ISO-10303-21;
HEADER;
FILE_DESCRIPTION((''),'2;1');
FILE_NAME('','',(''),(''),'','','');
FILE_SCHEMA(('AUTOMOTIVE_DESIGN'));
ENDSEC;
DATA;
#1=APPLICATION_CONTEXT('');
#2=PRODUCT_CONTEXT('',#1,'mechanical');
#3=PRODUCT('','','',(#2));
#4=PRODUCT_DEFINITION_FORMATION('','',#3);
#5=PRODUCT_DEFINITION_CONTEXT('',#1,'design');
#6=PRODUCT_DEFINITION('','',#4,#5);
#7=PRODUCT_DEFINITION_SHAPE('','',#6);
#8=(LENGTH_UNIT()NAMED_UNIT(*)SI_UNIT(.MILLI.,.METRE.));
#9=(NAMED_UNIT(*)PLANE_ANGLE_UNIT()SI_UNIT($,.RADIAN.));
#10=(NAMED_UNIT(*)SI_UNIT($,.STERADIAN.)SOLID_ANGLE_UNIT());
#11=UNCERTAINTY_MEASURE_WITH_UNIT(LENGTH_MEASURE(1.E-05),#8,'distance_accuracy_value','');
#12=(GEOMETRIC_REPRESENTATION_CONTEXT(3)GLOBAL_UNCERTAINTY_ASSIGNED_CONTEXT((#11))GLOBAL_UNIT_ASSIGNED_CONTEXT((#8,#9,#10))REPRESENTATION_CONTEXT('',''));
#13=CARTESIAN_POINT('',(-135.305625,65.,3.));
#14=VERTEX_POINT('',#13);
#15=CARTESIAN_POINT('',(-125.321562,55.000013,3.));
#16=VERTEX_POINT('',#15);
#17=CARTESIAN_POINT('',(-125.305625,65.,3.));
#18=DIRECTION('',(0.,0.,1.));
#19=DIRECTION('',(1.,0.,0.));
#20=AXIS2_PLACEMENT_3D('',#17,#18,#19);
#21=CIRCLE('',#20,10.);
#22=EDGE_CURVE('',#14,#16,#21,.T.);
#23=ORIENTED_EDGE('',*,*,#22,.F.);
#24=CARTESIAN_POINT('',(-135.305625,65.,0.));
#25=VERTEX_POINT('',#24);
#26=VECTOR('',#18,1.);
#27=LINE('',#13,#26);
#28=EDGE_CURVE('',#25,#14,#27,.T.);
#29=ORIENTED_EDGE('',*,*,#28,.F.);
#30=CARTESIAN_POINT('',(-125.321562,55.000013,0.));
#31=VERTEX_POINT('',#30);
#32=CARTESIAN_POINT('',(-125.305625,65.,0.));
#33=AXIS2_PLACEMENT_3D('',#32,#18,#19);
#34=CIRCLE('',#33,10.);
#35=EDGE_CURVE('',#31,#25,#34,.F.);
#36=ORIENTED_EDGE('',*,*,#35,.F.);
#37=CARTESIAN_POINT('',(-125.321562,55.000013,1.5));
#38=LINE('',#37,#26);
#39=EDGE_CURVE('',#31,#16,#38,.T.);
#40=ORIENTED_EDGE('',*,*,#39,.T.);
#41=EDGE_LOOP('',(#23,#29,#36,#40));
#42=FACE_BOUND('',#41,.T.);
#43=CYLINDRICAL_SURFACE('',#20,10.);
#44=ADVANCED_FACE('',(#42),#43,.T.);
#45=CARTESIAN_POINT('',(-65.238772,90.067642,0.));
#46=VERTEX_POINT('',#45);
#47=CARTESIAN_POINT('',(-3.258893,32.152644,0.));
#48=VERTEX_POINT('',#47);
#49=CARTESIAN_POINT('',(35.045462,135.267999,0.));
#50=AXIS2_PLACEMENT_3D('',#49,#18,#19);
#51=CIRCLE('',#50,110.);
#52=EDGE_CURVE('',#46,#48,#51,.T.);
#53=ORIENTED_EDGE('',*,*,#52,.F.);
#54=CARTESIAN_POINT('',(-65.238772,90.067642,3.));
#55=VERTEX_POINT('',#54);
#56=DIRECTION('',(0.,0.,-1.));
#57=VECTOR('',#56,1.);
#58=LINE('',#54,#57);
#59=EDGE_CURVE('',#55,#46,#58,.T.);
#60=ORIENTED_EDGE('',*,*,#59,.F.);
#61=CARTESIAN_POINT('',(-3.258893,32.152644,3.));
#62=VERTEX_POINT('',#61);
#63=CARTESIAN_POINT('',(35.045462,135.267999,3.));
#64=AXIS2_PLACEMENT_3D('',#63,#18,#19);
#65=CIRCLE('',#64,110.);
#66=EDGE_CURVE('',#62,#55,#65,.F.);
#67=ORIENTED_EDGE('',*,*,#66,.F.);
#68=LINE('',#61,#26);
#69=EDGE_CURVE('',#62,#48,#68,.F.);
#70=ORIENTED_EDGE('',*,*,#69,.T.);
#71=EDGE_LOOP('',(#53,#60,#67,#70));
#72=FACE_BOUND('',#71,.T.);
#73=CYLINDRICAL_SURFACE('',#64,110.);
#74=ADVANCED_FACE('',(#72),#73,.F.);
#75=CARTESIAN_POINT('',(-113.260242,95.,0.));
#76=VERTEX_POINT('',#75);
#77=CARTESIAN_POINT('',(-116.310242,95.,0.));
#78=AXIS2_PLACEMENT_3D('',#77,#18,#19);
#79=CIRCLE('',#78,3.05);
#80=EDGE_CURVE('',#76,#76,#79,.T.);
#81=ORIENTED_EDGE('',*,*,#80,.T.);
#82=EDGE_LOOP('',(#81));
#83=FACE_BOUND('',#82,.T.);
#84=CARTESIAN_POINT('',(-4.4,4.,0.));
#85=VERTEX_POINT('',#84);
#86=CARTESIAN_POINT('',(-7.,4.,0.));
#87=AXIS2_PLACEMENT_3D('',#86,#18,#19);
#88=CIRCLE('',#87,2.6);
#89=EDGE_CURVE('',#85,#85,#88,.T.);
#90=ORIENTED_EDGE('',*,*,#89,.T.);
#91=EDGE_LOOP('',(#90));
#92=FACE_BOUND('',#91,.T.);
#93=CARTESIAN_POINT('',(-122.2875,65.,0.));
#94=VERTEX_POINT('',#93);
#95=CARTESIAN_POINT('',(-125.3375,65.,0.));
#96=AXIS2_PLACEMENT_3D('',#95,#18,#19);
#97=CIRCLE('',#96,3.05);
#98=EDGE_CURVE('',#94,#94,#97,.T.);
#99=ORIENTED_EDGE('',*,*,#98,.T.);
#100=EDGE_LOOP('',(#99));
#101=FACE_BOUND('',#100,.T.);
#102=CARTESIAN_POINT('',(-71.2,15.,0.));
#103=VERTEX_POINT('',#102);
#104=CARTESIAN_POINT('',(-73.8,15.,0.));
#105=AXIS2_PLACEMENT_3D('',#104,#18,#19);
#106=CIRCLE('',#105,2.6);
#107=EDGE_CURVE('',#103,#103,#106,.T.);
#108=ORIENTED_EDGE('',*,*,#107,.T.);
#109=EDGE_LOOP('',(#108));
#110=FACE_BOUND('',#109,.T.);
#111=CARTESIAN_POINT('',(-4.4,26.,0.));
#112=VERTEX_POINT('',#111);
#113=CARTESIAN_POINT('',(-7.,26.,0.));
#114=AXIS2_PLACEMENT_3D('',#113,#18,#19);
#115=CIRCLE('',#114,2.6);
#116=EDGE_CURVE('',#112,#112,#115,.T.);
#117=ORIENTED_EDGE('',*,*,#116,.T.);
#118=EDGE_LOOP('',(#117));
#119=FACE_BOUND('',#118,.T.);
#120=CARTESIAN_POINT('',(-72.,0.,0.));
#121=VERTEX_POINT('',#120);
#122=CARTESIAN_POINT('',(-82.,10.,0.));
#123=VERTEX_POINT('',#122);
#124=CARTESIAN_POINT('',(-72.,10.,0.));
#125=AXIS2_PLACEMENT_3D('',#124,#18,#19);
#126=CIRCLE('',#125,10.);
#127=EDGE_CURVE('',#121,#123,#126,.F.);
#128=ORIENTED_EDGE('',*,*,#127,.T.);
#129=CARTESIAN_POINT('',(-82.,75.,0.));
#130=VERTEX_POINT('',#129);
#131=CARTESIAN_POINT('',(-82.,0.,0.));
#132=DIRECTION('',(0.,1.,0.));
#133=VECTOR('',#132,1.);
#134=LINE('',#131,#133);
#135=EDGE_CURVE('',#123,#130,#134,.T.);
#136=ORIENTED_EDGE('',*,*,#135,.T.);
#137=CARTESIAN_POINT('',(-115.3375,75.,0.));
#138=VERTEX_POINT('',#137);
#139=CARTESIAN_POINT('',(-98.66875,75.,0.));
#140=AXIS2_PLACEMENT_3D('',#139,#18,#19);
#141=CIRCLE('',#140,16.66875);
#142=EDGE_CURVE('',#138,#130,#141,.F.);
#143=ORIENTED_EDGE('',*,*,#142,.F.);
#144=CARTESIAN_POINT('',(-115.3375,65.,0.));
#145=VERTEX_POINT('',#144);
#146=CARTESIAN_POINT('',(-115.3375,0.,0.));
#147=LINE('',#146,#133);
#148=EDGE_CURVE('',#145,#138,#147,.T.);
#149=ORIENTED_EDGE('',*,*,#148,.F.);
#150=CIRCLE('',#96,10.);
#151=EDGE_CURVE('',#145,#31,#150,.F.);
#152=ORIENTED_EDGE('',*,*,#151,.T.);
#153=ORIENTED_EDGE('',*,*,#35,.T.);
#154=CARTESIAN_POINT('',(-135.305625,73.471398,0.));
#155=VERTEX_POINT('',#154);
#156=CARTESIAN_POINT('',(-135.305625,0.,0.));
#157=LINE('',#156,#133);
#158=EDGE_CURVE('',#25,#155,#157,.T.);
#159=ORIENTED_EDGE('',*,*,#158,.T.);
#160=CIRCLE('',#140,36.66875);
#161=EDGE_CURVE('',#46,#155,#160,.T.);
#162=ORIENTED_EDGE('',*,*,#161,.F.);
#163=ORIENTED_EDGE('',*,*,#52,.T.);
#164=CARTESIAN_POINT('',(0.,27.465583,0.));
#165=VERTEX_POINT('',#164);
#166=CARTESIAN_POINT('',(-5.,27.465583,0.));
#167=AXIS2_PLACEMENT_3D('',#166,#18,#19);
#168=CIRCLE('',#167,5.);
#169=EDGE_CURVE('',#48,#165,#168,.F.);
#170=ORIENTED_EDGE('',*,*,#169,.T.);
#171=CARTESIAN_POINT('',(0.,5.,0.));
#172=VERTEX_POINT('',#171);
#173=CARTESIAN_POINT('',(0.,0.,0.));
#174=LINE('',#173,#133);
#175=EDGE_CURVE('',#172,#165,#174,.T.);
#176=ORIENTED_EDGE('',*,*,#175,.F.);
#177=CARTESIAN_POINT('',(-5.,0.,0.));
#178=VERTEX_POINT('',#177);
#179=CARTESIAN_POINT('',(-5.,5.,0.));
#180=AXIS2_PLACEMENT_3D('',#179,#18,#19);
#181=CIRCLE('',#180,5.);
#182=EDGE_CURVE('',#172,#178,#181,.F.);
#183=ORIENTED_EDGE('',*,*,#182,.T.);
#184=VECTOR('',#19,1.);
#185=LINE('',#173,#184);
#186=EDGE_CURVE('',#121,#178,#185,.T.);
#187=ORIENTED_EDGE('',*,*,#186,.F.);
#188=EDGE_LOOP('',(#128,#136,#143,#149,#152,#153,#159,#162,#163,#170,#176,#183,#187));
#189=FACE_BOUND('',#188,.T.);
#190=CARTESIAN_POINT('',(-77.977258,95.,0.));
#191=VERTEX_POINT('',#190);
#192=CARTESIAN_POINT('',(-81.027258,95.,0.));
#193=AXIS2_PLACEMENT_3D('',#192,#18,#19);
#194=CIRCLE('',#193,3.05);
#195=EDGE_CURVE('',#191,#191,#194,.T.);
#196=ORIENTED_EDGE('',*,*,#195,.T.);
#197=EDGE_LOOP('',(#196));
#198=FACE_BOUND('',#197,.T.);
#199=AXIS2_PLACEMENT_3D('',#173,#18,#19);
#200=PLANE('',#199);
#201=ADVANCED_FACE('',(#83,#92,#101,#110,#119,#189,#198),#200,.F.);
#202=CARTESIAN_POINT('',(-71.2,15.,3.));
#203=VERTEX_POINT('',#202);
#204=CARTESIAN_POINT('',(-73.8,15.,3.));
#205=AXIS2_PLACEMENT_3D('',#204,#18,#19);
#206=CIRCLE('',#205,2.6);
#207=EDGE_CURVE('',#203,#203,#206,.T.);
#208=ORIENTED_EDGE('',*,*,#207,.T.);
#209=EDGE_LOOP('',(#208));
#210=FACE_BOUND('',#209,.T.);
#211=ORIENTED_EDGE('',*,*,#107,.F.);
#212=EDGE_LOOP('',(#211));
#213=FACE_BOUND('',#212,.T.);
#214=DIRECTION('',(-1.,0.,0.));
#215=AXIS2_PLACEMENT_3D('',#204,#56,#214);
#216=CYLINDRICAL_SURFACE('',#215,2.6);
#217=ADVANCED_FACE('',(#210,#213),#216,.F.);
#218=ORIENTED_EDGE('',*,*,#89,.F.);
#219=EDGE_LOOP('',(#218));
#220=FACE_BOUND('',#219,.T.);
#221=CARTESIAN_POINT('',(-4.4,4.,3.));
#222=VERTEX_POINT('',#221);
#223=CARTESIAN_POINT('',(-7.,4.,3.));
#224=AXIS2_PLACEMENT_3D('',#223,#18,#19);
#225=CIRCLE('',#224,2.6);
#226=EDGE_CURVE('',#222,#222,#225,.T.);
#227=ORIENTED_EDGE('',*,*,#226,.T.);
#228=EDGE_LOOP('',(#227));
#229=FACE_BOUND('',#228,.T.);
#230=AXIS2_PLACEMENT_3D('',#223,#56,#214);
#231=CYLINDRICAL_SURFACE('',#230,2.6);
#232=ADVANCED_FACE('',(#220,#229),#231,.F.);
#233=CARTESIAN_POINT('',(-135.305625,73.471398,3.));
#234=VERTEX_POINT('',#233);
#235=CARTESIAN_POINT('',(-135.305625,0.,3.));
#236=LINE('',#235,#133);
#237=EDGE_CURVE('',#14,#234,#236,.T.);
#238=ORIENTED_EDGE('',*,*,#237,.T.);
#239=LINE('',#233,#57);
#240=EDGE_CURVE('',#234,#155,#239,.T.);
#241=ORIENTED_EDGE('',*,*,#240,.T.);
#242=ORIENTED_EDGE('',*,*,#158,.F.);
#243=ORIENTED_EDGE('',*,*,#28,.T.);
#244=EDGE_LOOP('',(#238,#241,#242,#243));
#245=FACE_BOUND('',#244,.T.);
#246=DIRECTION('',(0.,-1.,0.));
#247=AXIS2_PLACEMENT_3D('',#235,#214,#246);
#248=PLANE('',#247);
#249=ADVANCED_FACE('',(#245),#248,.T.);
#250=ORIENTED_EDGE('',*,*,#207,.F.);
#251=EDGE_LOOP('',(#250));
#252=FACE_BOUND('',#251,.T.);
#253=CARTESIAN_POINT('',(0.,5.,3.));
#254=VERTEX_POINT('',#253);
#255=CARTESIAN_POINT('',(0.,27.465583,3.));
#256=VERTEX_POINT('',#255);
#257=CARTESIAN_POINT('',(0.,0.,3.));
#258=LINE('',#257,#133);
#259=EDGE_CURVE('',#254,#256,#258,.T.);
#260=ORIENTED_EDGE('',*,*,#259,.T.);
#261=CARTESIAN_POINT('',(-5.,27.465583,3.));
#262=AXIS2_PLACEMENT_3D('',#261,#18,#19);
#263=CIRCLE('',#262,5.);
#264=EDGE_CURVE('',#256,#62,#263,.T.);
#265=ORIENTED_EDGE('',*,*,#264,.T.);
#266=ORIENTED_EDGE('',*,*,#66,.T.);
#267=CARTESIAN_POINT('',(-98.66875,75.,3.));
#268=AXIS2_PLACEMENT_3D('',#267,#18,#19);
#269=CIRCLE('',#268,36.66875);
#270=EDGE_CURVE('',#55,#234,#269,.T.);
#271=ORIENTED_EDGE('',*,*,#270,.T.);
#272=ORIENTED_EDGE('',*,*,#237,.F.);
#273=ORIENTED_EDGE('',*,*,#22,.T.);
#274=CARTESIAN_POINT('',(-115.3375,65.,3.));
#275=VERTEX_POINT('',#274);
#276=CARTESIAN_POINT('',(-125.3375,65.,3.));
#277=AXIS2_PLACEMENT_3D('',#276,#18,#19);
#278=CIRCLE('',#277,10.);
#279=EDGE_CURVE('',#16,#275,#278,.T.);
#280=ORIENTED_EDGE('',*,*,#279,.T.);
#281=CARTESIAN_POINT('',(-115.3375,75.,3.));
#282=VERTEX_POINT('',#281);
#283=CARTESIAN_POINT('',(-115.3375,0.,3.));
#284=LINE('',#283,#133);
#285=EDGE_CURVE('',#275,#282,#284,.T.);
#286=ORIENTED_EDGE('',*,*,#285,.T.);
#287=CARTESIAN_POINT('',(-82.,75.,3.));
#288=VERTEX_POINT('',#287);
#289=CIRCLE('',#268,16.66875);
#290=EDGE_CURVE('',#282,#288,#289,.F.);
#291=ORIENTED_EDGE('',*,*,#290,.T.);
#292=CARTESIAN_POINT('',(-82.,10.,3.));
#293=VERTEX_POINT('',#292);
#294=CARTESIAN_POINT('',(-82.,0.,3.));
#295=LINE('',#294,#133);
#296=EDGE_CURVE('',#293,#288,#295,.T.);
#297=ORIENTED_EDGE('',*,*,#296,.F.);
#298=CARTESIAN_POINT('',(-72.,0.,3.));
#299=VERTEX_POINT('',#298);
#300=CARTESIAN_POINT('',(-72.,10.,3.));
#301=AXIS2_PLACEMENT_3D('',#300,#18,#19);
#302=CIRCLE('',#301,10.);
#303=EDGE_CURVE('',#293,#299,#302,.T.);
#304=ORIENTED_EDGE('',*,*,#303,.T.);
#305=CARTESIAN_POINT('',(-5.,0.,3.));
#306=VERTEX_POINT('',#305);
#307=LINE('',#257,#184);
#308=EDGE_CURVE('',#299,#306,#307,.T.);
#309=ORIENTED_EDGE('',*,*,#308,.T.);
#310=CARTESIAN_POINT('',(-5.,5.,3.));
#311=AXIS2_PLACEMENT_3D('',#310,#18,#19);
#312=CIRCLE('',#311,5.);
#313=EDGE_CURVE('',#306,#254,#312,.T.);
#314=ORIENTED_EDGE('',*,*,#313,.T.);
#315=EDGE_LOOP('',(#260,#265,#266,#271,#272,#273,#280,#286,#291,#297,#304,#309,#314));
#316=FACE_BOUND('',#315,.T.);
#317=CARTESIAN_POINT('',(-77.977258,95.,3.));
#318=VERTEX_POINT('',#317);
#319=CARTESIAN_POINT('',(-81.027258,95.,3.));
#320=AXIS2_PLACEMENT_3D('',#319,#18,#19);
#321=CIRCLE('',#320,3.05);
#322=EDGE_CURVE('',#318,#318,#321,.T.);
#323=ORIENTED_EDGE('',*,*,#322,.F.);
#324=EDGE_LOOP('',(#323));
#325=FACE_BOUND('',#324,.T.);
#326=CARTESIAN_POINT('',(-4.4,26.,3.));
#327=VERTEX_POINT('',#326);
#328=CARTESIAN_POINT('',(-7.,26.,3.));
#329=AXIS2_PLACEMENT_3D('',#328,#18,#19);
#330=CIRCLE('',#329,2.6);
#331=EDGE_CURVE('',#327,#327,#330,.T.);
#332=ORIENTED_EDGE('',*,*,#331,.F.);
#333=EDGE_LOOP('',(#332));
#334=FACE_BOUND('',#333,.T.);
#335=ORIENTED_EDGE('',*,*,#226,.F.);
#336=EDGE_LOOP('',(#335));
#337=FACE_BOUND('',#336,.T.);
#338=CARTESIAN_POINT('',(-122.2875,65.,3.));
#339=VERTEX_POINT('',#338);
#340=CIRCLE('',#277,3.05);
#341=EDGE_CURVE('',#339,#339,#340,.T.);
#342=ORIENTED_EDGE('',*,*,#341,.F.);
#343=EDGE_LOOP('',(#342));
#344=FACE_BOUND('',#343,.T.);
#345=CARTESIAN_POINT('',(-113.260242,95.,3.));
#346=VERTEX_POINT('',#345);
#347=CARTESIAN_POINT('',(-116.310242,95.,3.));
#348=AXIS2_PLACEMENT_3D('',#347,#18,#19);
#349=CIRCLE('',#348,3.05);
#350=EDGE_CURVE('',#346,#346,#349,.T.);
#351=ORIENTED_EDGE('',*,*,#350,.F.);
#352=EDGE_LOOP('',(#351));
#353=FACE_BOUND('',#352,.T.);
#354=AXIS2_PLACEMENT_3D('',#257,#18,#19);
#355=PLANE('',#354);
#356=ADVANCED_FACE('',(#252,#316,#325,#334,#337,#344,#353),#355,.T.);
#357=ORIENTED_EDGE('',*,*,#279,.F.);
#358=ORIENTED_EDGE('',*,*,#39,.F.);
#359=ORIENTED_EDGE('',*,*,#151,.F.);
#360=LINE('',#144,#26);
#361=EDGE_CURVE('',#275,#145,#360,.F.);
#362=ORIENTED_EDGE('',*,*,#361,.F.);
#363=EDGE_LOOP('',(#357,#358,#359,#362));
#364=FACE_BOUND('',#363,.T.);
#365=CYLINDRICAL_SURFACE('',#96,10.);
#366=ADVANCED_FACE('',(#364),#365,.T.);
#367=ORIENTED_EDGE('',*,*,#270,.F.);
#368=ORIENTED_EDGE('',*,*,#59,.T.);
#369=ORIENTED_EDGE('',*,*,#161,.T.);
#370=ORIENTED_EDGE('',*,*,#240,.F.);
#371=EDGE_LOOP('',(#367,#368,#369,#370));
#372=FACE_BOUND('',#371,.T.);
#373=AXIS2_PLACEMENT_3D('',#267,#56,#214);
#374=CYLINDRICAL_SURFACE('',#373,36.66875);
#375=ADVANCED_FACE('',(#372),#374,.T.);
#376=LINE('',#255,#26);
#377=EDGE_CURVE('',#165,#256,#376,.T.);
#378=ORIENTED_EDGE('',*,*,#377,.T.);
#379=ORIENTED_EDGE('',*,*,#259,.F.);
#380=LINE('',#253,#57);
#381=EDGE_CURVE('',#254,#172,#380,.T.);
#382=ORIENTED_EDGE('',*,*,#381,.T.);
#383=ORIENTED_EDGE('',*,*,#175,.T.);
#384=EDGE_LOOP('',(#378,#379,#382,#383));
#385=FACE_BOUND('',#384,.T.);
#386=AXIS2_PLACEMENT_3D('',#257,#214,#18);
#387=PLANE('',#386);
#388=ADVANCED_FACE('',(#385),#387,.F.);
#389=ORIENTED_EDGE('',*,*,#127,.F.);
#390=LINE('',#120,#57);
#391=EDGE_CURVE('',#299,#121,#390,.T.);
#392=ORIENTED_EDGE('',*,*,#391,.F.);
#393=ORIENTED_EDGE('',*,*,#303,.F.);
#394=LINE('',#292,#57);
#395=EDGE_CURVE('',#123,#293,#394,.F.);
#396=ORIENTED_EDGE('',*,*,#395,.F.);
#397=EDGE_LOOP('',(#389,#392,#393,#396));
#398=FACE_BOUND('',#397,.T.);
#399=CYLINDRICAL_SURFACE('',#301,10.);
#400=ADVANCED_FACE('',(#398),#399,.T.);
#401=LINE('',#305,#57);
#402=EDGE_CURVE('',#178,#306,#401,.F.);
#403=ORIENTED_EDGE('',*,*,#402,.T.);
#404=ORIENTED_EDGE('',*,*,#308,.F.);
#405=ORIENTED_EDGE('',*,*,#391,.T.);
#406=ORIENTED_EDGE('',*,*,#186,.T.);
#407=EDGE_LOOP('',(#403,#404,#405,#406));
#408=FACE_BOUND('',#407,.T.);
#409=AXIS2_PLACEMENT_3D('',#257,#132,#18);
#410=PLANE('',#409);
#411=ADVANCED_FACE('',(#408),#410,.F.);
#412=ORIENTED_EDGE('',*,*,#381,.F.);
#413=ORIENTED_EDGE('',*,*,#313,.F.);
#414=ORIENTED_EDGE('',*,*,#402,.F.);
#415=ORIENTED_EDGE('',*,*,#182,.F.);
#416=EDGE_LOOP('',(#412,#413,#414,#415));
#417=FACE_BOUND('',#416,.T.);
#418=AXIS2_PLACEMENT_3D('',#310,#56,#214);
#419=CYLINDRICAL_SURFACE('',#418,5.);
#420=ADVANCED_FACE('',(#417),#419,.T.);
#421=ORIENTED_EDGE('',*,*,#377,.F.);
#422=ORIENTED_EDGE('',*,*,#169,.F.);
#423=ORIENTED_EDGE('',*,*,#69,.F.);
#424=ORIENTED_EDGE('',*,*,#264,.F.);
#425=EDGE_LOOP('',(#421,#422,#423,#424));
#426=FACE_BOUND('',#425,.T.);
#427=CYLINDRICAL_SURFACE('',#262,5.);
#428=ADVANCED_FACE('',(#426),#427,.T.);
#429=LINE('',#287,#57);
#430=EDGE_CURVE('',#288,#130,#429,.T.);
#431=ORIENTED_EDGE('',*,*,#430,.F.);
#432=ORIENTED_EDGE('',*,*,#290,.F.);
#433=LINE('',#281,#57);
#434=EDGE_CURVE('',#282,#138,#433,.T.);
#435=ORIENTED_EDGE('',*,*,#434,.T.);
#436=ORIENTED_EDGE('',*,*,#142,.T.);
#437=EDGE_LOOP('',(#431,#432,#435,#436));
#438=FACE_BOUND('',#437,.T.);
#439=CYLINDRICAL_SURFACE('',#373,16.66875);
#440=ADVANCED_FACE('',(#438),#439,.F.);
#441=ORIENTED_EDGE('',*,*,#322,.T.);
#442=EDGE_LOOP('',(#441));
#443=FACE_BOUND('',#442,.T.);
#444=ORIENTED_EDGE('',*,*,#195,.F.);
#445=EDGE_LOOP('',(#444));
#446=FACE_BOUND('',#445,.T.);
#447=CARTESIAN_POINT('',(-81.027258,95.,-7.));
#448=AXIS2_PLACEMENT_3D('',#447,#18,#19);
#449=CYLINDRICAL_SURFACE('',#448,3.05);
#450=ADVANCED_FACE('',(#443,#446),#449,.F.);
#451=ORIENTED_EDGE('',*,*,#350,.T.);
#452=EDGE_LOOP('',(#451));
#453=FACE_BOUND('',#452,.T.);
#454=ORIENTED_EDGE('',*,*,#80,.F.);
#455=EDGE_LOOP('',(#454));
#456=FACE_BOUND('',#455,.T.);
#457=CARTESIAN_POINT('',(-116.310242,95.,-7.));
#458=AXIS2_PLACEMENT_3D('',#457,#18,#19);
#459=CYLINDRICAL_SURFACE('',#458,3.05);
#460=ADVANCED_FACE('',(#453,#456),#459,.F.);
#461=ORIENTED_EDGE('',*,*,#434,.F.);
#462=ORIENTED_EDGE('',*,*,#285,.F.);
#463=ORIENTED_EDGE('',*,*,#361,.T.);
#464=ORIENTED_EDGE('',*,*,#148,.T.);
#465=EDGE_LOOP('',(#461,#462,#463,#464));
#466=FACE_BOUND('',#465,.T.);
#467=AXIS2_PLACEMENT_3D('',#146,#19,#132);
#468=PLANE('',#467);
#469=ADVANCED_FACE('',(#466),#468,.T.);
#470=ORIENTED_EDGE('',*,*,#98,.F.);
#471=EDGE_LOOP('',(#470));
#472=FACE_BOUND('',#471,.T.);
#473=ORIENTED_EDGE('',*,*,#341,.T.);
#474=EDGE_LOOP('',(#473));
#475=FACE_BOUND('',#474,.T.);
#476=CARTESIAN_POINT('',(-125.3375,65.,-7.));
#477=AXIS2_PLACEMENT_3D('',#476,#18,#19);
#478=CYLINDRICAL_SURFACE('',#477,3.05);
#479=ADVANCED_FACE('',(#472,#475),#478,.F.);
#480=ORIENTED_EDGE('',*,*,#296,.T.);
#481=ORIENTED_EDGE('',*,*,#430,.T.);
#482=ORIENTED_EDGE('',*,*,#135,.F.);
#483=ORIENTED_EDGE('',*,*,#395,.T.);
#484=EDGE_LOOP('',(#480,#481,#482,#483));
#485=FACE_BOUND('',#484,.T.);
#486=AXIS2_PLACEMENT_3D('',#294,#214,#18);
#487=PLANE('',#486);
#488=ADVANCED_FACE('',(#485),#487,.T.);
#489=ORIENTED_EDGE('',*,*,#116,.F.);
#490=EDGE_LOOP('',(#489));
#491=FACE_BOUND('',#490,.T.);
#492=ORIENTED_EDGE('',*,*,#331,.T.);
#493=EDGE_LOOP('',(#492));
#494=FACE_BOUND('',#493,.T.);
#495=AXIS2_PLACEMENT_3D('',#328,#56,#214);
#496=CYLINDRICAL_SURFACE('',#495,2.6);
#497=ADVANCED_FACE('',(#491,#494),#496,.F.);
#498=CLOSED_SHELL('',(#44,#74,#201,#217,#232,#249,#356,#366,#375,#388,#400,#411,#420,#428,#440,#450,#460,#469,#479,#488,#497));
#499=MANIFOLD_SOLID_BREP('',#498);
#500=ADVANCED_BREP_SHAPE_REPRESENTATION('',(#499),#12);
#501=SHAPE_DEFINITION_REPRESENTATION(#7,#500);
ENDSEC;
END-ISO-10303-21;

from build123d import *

# Parameters (mm, degrees)
ESBO_O1_R                = 2.6
RESSALTO_EXTRUS_O1_DEPTH = 3
FILETE2_R                = 110
FILETE3_R                = 4
RESSALTO_EXTRUS_O2_DEPTH = 3
FILETE4_R                = 10
FILETE5_R                = 10
FILETE6_R                = 5
ESBO_O3_R                = 3.05
CORTE_EXTRUS_O1_DEPTH    = 10


with BuildPart() as part:
    # Esboço1 → Ressalto-extrusão1 (new body)
    with BuildSketch(Plane.XY):
        with BuildLine():
            Line((-82, 75), (-82, 0))
            Line((-82, 0), (0, 0))
            Line((0, 0), (0, 31))
            Line((0, 31), (-62, 31))
            Line((-62, 31), (-62, 75))
            ThreePointArc((-62, 75), (-99.43321729, 111.660780356), (-135.305624889, 73.47139772))
            Line((-135.305624889, 73.47139772), (-135.305624889, 63.47139772))
            Line((-135.305624889, 63.47139772), (-115.3375, 75))
            ThreePointArc((-115.3375, 75), (-98.66875, 91.66875), (-82, 75))
        make_face()
        with Locations((-7, 26)):
            Circle(ESBO_O1_R, mode=Mode.SUBTRACT)
        with Locations((-73.8, 15)):
            Circle(ESBO_O1_R, mode=Mode.SUBTRACT)
        with Locations((-7, 4)):
            Circle(ESBO_O1_R, mode=Mode.SUBTRACT)
    extrude(amount=RESSALTO_EXTRUS_O1_DEPTH)

    # Filete2
    # the kernel refuses this fillet: 110 mm, written as the material it adds along each edge
    with BuildSketch(Plane(origin=(-62, 31, 0), x_dir=(1, 0, 0), z_dir=(0, 0, 1))) as filete2_piece_1_section:
        with BuildLine():
            CenterArc((97.045462199, 104.267998826), FILETE2_R, 204.262159278, 47.159856314)
            Line((-3.238772458, 59.067641757), (-13.267195924, 54.54760605))
            ThreePointArc((-13.267195924, 54.54760605), (-11, 44), (-11, 0))
            Line((-11, 0), (0, -11))
            ThreePointArc((0, -11), (31, -11), (58.49545378, -10.426799883))
            Line((58.49545378, -10.426799883), (62, 0))
        make_face()
    filete2_piece_1 = extrude(amount=3, mode=Mode.PRIVATE)
    filete2_piece_1 = filete2_piece_1 - Plane(origin=(-7, 26, 1.5), x_dir=(1, 0, 0), z_dir=(0, 0, -1)) * Cylinder(2.6, 255, mode=Mode.PRIVATE)
    add(filete2_piece_1)

    # Filete3
    filete3_edges = [part.edges().sort_by_distance(p)[0] for p in [
        (-135.305624889, 63.47139772, 1.5),
    ]]
    fillet(filete3_edges, radius=FILETE3_R)

    # Esboço2 → Ressalto-extrusão2 (add, through all)
    with BuildSketch(Plane.XY.offset(3)):
        with BuildLine():
            ThreePointArc((-129.305624889, 66.935499335), (-133.305624889, 66.935499335), (-135.305624889, 70.39960095))
            Line((-135.305624889, 70.39960095), (-135.305624889, 55))
            Line((-135.305624889, 55), (-115.3375, 55))
            Line((-115.3375, 55), (-115.3375, 75))
            Line((-115.3375, 75), (-129.305624889, 66.935499335))
        make_face()
    extrude(amount=-RESSALTO_EXTRUS_O2_DEPTH)

    # Filete4
    # the kernel refuses this fillet: 10 mm, written as the material it takes off along each edge
    with BuildSketch(Plane(origin=(-135.305624889, 55, 28), x_dir=(0, 1, 0), z_dir=(0, 0, -1)), Plane(origin=(-115.3375, 55, 28), x_dir=(-1, 0, 0), z_dir=(0, 0, -1))) as filete4_piece_1:
        with BuildLine():
            CenterArc((FILETE4_R, FILETE4_R), FILETE4_R, 180, 90)
            Line((0, FILETE4_R), (0, 0))
            Line((0, 0), (FILETE4_R, 0))
        make_face()
    extrude(amount=53, mode=Mode.SUBTRACT)

    # Filete5
    filete5_edges = [part.edges().sort_by_distance(p)[0] for p in [
        (-82, 0, 1.5),
    ]]
    fillet(filete5_edges, radius=FILETE5_R)

    # Filete6
    filete6_edges = [part.edges().sort_by_distance(p)[0] for p in [
        (0, 31, 1.5),
        (0, 0, 1.5),
    ]]
    fillet(filete6_edges, radius=FILETE6_R)

    # Esboço3 → Corte-extrusão1 (cut)
    with BuildSketch(Plane.XY.offset(3)):
        with Locations((-125.3375, 65)):
            Circle(ESBO_O3_R)
        with Locations((-116.31024162, 95)):
            Circle(ESBO_O3_R)
        with Locations((-81.02725838, 95)):
            Circle(ESBO_O3_R)
    extrude(amount=-CORTE_EXTRUS_O1_DEPTH, mode=Mode.SUBTRACT)


solid = part.part
